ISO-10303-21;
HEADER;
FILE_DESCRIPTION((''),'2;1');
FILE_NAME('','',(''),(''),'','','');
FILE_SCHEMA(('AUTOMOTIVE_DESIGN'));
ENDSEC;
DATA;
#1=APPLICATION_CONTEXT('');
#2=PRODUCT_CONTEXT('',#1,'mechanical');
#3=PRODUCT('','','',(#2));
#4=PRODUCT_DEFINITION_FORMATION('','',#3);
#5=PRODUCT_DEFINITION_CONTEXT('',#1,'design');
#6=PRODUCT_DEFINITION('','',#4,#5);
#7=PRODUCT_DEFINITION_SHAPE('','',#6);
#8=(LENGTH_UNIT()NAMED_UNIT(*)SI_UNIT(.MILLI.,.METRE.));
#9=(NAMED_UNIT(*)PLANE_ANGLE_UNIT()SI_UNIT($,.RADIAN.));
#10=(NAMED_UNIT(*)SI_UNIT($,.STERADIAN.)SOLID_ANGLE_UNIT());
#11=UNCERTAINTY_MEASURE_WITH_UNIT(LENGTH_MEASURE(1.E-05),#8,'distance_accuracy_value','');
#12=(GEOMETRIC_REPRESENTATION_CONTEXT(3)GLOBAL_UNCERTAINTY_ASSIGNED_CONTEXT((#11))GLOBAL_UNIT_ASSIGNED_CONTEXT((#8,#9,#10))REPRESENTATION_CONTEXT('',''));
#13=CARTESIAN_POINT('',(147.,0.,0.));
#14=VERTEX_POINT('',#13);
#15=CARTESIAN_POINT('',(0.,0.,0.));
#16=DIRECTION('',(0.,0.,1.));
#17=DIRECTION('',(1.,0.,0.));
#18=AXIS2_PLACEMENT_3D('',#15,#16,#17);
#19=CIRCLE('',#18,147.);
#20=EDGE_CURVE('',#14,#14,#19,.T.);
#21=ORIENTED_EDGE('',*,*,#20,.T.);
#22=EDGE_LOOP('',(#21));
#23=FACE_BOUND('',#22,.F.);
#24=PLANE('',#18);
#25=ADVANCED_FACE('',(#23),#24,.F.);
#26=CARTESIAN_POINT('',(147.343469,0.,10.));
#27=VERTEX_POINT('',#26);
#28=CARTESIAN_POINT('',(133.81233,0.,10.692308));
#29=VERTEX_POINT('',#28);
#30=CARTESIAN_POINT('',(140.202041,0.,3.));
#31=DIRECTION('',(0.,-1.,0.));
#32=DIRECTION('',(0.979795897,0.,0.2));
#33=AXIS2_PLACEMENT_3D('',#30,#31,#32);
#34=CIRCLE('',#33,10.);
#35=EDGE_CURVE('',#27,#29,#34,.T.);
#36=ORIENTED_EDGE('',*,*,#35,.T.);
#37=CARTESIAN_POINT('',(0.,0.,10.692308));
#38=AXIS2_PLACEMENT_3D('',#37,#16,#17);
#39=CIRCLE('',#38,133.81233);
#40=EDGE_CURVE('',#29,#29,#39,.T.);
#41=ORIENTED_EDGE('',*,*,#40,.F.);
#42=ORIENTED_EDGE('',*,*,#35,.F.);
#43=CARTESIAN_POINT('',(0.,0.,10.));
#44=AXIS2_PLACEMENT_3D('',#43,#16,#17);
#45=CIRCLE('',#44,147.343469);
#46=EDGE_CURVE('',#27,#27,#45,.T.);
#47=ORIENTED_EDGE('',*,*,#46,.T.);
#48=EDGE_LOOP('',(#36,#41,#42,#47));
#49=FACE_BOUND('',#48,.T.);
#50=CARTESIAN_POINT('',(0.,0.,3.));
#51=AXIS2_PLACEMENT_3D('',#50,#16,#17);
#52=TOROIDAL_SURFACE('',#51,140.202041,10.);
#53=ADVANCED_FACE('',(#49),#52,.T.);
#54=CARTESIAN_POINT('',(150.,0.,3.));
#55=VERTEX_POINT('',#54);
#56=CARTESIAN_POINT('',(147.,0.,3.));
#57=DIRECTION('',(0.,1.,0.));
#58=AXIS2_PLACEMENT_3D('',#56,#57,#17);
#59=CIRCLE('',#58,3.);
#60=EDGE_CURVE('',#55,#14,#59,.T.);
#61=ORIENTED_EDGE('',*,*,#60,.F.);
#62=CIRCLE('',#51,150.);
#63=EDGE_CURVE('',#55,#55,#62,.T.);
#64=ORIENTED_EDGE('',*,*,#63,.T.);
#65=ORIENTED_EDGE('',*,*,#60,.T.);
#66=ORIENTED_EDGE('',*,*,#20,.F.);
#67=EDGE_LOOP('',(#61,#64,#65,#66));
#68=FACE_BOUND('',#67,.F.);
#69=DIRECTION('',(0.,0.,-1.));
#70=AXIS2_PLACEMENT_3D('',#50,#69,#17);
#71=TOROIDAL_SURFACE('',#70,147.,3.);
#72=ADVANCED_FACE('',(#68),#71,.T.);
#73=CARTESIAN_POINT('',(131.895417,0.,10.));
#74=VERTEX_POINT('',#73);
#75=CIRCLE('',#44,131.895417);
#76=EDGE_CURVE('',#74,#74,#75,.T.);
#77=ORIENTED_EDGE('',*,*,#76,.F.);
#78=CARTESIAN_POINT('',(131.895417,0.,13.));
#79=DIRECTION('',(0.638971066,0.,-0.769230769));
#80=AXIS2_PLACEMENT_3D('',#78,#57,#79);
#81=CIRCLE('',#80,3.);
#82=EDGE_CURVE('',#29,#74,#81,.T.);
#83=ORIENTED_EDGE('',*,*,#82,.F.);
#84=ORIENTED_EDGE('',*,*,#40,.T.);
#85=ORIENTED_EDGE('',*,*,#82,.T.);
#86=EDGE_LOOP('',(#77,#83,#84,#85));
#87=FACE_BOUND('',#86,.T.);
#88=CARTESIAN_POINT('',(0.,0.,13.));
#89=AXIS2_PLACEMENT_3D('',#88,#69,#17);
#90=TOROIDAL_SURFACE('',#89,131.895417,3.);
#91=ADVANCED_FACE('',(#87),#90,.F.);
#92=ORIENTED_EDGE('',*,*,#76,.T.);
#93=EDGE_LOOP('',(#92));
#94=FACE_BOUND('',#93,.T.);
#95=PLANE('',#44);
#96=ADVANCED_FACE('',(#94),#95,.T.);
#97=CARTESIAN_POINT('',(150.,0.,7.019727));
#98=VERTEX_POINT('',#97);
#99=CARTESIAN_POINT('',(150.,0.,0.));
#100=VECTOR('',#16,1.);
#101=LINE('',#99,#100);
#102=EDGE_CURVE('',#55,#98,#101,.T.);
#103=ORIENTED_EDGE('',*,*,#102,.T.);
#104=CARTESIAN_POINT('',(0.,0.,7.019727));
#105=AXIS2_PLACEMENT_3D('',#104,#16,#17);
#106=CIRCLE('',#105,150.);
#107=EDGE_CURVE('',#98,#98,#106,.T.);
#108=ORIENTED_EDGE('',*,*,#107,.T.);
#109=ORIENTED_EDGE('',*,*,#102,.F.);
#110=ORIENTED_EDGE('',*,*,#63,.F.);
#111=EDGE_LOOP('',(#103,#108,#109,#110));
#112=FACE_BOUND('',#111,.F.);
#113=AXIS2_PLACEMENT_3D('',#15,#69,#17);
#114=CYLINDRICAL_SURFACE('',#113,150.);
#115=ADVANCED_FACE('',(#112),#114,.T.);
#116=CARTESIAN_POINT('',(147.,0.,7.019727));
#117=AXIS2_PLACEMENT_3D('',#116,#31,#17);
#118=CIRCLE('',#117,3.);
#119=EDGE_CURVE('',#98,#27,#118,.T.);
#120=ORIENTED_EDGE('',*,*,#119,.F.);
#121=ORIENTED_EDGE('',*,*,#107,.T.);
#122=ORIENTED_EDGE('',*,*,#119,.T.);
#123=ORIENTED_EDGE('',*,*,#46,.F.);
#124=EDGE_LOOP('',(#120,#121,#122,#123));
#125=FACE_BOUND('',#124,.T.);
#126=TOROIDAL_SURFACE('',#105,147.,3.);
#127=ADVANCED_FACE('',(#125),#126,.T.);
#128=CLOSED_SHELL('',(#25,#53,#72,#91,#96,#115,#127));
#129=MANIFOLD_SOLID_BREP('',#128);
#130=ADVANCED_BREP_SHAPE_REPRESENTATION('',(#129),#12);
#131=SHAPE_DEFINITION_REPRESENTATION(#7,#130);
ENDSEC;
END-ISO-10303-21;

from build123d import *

# Parameters (mm, degrees)
F0_R     = 150
F1_DEPTH = 10


# Not quite as in the source:
# - a fillet or chamfer that OpenCascade refuses, or shapes differently, is made with other operations: its cross-section is extruded or revolved along the edge and cut away or added


with BuildPart() as f1:
    # F0 (on Top) → F1 (new body)
    with BuildSketch(Plane.XY):
        Circle(F0_R)
    extrude(amount=F1_DEPTH)

    # F2 (on Front) → F3 (revolve)
    with BuildSketch(Plane.XZ):
        with BuildLine():
            Line((130.4040820577, 5), (150, 5))
            ThreePointArc((150, 5), (140.2020410289, 13), (130.4040820577, 5))
        make_face()
    revolve(axis=Axis((0, 0, 19.3104613572), (0, 0, 1)))

    # F4: fillet of radius 3 on 4 edges, made by hand

    # F4_s1 → F4_t2 (revolve)
    with BuildSketch(Plane.XZ):
        with BuildLine():
            ThreePointArc((133.8123303651, 10.6923076923), (132.9144664967, 10.1783801706), (131.8954171659, 10))
            Line((131.8954171659, 10), (133.0606126003, 10))
            ThreePointArc((133.0606126003, 10), (133.4276219564, 10.3557627905), (133.8123303651, 10.6923076923))
        make_face()
    revolve(axis=Axis((0, 0, 10), (0, 0, 1)))

    # F4_s3 → F4_t4 (revolve, cut)
    with BuildSketch(Plane.XZ):
        with BuildLine():
            ThreePointArc((150, 3), (149.1213203436, 0.8786796564), (147, 0))
            Line((147, 0), (150, 0))
            Line((150, 0), (150, 3))
        make_face()
    revolve(axis=Axis((0, 0, 0), (0, 0, 1)), mode=Mode.SUBTRACT)

    # F4_s5 → F4_t6 (revolve, cut)
    with BuildSketch(Plane.XZ):
        with BuildLine():
            ThreePointArc((150, 7.0197267354), (149.2394651563, 9.01592207), (147.3434694574, 10))
            Line((147.3434694574, 10), (150, 10))
            Line((150, 10), (150, 7.0197267354))
        make_face()
    revolve(axis=Axis((0, 0, 10), (0, 0, 1)), mode=Mode.SUBTRACT)


solid = f1.part
